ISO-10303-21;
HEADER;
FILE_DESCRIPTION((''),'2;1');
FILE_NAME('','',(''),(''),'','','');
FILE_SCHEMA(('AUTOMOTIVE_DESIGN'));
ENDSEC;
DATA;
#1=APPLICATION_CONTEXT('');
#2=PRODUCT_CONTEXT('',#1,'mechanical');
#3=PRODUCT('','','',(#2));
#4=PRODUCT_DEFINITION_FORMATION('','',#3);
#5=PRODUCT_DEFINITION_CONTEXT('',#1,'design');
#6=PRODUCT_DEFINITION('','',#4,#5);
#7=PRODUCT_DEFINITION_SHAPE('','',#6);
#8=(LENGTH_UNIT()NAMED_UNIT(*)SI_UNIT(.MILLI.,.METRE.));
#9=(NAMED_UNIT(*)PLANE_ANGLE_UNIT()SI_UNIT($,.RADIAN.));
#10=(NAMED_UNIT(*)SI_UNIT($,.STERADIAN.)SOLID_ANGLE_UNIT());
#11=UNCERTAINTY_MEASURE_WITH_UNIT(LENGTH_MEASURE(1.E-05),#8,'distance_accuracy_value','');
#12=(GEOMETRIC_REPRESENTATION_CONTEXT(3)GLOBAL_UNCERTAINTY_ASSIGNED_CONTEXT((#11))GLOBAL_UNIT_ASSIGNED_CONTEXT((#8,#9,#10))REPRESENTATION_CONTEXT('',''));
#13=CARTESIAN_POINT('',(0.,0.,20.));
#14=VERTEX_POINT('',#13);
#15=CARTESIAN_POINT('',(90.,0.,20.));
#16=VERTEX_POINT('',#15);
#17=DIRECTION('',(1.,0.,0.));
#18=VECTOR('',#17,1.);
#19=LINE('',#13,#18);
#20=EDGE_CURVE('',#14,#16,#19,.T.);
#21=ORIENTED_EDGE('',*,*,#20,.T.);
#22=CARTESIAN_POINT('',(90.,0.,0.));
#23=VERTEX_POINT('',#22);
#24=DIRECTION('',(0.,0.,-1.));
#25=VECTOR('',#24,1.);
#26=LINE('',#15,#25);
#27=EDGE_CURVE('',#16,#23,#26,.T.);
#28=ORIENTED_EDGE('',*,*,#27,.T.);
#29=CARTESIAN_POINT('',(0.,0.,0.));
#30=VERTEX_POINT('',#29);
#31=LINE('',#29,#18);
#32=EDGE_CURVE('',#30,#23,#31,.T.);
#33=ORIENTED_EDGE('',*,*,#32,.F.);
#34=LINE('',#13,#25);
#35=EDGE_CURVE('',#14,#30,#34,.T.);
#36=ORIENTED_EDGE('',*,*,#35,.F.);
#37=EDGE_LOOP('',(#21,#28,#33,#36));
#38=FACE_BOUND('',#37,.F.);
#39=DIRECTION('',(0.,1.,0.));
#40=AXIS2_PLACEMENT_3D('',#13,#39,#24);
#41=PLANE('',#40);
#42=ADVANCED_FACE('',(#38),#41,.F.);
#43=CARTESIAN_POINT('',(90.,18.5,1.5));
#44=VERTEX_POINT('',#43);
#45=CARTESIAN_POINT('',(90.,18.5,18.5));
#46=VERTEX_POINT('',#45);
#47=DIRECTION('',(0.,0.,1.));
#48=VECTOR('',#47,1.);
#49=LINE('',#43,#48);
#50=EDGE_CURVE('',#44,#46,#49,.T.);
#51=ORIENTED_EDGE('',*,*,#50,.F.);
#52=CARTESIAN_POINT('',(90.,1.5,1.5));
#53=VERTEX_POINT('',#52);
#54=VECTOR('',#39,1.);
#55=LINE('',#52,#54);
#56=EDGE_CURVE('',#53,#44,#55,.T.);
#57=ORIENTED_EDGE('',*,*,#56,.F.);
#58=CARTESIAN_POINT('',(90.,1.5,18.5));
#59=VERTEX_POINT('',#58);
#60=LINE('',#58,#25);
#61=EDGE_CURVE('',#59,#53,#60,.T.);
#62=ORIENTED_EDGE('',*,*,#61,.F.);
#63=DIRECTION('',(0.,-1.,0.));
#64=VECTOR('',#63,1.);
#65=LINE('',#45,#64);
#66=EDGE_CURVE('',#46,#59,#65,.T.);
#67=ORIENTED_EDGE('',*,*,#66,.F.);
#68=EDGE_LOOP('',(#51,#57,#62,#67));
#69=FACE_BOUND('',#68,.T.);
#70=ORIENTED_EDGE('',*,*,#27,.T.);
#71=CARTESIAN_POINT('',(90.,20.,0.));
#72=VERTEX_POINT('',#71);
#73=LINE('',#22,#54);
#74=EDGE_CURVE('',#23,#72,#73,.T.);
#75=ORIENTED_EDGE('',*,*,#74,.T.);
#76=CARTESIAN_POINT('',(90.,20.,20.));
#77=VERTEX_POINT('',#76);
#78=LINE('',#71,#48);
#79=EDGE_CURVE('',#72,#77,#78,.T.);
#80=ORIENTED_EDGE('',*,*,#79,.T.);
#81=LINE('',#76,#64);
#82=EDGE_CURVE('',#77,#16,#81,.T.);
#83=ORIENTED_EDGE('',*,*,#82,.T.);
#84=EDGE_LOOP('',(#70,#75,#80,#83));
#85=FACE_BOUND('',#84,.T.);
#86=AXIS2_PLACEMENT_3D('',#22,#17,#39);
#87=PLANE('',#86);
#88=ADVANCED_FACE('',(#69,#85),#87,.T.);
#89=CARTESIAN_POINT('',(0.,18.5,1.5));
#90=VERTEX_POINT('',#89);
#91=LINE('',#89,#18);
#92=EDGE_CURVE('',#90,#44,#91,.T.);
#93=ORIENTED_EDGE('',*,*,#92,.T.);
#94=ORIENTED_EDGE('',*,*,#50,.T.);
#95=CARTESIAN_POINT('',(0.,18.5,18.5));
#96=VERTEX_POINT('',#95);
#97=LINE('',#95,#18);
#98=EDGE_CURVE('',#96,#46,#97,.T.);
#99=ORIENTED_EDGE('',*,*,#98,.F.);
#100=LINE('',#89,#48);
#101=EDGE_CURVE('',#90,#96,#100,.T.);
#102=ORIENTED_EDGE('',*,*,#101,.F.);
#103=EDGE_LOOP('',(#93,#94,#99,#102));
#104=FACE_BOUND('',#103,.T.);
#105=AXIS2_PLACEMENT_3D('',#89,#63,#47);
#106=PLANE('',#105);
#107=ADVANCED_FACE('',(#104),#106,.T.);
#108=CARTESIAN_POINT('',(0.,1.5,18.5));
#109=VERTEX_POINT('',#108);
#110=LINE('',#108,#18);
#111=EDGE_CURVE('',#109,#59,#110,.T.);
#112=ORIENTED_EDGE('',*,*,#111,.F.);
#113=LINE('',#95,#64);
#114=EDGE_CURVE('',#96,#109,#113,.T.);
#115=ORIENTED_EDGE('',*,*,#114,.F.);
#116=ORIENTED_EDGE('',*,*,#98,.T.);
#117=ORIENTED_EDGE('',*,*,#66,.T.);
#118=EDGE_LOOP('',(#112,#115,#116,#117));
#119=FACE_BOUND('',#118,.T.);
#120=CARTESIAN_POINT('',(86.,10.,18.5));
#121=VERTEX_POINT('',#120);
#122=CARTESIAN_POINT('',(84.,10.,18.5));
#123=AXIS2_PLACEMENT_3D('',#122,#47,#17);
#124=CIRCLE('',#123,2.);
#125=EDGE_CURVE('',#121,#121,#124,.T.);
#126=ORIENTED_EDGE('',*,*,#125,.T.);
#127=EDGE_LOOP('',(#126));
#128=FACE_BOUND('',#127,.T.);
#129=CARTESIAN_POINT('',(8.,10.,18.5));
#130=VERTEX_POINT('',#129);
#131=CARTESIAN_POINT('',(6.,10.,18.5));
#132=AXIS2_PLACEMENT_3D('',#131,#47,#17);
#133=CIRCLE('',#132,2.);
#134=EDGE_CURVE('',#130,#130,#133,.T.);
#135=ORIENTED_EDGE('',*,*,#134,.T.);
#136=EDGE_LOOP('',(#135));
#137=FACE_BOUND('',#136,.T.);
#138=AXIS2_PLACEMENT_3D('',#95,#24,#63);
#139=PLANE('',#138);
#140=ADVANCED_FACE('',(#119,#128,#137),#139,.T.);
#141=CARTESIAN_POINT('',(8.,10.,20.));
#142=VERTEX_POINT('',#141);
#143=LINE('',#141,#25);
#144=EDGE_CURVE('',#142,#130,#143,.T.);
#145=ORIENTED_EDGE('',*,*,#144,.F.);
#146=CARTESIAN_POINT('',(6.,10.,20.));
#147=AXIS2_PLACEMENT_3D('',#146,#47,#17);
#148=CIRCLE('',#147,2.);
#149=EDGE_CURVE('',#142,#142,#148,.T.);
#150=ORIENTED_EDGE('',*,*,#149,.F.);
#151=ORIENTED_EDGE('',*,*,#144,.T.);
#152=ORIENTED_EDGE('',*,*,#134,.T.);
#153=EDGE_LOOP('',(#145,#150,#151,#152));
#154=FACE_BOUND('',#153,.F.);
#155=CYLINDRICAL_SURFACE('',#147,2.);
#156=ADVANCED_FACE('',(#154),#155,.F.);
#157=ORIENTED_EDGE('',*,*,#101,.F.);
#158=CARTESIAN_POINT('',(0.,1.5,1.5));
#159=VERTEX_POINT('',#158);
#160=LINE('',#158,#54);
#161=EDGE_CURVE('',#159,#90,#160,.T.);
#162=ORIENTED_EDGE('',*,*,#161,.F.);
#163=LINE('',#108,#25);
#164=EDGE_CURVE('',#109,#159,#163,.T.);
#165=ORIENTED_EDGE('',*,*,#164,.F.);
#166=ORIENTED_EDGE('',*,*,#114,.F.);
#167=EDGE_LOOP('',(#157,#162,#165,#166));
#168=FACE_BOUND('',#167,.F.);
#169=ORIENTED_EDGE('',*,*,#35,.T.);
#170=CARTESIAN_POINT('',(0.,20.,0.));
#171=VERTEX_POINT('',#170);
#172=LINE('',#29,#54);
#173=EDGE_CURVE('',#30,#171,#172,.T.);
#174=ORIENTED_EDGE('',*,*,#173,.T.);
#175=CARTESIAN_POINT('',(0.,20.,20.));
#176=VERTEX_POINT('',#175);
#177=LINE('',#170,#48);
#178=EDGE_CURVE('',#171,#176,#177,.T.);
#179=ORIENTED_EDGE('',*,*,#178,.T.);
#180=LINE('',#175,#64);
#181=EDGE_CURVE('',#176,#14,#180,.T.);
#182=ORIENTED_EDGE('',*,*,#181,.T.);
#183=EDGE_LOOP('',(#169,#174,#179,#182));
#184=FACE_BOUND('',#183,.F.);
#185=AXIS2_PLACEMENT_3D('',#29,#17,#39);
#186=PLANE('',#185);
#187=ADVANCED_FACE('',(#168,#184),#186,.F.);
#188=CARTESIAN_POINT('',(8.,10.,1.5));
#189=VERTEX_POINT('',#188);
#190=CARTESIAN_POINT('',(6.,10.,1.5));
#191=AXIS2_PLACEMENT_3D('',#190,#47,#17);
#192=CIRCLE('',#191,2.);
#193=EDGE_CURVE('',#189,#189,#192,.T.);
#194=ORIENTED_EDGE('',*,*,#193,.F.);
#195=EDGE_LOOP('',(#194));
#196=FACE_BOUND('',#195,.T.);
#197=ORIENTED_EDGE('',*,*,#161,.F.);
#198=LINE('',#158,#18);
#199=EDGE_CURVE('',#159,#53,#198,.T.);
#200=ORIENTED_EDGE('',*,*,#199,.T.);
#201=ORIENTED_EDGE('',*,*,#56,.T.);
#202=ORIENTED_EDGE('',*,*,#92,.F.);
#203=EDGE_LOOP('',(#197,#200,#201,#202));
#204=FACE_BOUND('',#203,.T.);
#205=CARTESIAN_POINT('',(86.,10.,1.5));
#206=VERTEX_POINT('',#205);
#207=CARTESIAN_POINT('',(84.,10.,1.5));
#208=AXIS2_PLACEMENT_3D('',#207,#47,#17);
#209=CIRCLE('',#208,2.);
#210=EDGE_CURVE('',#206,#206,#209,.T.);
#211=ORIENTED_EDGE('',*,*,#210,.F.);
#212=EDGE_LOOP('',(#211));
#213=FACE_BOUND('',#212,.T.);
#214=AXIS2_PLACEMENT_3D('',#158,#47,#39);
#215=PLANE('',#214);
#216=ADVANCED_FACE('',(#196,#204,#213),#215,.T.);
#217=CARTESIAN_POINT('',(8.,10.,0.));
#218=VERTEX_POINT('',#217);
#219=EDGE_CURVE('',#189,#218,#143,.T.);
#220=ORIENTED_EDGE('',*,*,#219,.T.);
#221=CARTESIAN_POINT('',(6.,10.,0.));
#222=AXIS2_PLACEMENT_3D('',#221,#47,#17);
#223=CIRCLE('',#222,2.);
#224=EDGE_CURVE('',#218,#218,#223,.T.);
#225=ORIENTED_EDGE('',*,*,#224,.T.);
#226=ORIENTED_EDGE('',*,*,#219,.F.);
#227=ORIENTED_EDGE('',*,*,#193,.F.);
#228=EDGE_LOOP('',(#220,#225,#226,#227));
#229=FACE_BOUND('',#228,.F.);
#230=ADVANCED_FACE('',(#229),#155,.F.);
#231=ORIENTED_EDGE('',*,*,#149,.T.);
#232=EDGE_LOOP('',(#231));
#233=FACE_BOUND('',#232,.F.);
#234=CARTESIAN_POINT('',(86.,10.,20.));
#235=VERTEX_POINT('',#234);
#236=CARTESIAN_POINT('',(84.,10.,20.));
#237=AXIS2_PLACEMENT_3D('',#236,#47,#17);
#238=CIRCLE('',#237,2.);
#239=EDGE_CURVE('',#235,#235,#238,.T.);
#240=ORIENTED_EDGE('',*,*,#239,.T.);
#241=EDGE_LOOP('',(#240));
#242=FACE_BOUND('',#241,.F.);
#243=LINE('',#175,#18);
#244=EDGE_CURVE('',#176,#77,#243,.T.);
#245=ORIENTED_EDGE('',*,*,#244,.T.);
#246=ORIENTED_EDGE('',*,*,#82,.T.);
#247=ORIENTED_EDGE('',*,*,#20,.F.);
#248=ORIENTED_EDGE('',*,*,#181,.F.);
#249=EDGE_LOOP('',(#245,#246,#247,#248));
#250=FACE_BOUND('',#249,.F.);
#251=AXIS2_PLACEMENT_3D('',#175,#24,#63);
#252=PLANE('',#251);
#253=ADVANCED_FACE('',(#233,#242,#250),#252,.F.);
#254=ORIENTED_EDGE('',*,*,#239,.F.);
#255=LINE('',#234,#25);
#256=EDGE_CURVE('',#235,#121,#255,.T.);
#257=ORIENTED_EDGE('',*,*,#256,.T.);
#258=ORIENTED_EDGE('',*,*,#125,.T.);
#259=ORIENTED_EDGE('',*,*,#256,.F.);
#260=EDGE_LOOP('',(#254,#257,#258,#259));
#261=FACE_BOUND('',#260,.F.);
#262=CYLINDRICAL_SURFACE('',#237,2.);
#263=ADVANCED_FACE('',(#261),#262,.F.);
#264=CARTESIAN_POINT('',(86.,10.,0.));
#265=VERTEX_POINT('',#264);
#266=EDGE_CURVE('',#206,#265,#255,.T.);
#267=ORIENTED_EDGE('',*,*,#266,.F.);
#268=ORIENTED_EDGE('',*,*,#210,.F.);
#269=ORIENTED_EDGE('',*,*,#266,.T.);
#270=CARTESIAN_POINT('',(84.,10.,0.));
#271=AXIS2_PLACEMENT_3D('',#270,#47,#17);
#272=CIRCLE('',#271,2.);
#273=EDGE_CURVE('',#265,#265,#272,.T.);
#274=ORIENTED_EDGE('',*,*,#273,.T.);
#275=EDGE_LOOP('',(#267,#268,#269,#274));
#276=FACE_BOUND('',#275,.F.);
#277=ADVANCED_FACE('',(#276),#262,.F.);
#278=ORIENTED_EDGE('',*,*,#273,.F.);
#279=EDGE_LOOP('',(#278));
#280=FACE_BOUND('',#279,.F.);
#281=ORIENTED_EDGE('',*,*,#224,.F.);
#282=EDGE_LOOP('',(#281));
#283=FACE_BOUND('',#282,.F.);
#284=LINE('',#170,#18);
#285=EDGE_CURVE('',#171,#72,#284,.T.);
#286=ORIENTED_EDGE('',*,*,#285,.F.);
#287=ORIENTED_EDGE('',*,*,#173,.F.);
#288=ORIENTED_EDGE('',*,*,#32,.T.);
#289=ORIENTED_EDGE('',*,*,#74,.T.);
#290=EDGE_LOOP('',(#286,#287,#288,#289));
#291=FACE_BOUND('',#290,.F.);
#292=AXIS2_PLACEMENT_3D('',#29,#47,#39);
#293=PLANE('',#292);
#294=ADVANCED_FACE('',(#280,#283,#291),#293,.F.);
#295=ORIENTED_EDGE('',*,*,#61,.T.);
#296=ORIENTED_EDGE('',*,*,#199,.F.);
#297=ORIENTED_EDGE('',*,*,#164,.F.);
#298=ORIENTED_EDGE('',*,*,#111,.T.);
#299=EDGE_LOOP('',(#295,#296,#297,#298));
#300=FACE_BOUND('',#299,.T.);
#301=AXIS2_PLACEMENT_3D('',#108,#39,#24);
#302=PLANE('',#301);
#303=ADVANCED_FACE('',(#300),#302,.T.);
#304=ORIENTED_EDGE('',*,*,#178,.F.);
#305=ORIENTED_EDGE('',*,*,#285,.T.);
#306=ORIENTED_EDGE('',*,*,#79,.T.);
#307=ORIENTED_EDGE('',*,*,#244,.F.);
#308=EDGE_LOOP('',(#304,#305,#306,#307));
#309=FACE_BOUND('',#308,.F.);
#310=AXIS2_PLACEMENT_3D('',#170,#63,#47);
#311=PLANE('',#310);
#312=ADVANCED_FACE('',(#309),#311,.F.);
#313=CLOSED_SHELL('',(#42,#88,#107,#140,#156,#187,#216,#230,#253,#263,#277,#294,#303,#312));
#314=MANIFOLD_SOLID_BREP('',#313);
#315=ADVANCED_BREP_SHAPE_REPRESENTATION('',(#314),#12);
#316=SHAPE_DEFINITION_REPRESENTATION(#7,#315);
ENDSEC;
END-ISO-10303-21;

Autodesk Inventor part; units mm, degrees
ref_plane "YZ Plane" through (0, 0, 0) normal (1, 0, 0) x (0, 1, 0)
ref_plane "XZ Plane" through (0, 0, 0) normal (0, 1, 0) x (-1, 0, 0)
ref_plane "XY Plane" through (0, 0, 0) normal (0, 0, 1) x (1, 0, 0)
sketch "Эскиз2" plane through (0, 0, 0) normal (1, 0, 0) x (0, 1, 0)
  line L0 (0, 0) -> (20, 0)
  line L1 (20, 0) -> (20, 20)
  line L2 (20, 20) -> (0, 20)
  line L3 (0, 20) -> (0, 0)
  line L4 (18.5, 18.5) -> (1.5, 18.5)
  line L5 (1.5, 18.5) -> (1.5, 1.5)
  line L6 (1.5, 1.5) -> (18.5, 1.5)
  line L7 (18.5, 1.5) -> (18.5, 18.5)
  point P0 (10, 18.5)
  point P1 (10, 20)
  point P2 (18.5, 10)
  point P3 (20, 10)
  dimension "d0" = 20
  dimension "d1" = 1.5
extrude "Выдавливание1" add sketch "Эскиз2" along normal blind 90
sketch "Эскиз3" plane through (0, 0, 20) normal (0, 0, 1) x (1, 0, 0)
  circle A0 centre (6, 10) radius 2
  circle A1 centre (84, 10) radius 2
  line L0 (90, 20) -> (90, 0) projected
  line L1 (0, 20) -> (0, 0) projected
  point P0 (90, 10)
  point P1 (0, 10)
  point P2 (90, 10)
  point P3 (0, 10)
  dimension "d6" = 6
  dimension "d7" = 6
  dimension "d10" = 4
extrude "Выдавливание2" cut sketch "Эскиз3" against normal through all
equation "\"d7\" = d6"
properties part number "section"
